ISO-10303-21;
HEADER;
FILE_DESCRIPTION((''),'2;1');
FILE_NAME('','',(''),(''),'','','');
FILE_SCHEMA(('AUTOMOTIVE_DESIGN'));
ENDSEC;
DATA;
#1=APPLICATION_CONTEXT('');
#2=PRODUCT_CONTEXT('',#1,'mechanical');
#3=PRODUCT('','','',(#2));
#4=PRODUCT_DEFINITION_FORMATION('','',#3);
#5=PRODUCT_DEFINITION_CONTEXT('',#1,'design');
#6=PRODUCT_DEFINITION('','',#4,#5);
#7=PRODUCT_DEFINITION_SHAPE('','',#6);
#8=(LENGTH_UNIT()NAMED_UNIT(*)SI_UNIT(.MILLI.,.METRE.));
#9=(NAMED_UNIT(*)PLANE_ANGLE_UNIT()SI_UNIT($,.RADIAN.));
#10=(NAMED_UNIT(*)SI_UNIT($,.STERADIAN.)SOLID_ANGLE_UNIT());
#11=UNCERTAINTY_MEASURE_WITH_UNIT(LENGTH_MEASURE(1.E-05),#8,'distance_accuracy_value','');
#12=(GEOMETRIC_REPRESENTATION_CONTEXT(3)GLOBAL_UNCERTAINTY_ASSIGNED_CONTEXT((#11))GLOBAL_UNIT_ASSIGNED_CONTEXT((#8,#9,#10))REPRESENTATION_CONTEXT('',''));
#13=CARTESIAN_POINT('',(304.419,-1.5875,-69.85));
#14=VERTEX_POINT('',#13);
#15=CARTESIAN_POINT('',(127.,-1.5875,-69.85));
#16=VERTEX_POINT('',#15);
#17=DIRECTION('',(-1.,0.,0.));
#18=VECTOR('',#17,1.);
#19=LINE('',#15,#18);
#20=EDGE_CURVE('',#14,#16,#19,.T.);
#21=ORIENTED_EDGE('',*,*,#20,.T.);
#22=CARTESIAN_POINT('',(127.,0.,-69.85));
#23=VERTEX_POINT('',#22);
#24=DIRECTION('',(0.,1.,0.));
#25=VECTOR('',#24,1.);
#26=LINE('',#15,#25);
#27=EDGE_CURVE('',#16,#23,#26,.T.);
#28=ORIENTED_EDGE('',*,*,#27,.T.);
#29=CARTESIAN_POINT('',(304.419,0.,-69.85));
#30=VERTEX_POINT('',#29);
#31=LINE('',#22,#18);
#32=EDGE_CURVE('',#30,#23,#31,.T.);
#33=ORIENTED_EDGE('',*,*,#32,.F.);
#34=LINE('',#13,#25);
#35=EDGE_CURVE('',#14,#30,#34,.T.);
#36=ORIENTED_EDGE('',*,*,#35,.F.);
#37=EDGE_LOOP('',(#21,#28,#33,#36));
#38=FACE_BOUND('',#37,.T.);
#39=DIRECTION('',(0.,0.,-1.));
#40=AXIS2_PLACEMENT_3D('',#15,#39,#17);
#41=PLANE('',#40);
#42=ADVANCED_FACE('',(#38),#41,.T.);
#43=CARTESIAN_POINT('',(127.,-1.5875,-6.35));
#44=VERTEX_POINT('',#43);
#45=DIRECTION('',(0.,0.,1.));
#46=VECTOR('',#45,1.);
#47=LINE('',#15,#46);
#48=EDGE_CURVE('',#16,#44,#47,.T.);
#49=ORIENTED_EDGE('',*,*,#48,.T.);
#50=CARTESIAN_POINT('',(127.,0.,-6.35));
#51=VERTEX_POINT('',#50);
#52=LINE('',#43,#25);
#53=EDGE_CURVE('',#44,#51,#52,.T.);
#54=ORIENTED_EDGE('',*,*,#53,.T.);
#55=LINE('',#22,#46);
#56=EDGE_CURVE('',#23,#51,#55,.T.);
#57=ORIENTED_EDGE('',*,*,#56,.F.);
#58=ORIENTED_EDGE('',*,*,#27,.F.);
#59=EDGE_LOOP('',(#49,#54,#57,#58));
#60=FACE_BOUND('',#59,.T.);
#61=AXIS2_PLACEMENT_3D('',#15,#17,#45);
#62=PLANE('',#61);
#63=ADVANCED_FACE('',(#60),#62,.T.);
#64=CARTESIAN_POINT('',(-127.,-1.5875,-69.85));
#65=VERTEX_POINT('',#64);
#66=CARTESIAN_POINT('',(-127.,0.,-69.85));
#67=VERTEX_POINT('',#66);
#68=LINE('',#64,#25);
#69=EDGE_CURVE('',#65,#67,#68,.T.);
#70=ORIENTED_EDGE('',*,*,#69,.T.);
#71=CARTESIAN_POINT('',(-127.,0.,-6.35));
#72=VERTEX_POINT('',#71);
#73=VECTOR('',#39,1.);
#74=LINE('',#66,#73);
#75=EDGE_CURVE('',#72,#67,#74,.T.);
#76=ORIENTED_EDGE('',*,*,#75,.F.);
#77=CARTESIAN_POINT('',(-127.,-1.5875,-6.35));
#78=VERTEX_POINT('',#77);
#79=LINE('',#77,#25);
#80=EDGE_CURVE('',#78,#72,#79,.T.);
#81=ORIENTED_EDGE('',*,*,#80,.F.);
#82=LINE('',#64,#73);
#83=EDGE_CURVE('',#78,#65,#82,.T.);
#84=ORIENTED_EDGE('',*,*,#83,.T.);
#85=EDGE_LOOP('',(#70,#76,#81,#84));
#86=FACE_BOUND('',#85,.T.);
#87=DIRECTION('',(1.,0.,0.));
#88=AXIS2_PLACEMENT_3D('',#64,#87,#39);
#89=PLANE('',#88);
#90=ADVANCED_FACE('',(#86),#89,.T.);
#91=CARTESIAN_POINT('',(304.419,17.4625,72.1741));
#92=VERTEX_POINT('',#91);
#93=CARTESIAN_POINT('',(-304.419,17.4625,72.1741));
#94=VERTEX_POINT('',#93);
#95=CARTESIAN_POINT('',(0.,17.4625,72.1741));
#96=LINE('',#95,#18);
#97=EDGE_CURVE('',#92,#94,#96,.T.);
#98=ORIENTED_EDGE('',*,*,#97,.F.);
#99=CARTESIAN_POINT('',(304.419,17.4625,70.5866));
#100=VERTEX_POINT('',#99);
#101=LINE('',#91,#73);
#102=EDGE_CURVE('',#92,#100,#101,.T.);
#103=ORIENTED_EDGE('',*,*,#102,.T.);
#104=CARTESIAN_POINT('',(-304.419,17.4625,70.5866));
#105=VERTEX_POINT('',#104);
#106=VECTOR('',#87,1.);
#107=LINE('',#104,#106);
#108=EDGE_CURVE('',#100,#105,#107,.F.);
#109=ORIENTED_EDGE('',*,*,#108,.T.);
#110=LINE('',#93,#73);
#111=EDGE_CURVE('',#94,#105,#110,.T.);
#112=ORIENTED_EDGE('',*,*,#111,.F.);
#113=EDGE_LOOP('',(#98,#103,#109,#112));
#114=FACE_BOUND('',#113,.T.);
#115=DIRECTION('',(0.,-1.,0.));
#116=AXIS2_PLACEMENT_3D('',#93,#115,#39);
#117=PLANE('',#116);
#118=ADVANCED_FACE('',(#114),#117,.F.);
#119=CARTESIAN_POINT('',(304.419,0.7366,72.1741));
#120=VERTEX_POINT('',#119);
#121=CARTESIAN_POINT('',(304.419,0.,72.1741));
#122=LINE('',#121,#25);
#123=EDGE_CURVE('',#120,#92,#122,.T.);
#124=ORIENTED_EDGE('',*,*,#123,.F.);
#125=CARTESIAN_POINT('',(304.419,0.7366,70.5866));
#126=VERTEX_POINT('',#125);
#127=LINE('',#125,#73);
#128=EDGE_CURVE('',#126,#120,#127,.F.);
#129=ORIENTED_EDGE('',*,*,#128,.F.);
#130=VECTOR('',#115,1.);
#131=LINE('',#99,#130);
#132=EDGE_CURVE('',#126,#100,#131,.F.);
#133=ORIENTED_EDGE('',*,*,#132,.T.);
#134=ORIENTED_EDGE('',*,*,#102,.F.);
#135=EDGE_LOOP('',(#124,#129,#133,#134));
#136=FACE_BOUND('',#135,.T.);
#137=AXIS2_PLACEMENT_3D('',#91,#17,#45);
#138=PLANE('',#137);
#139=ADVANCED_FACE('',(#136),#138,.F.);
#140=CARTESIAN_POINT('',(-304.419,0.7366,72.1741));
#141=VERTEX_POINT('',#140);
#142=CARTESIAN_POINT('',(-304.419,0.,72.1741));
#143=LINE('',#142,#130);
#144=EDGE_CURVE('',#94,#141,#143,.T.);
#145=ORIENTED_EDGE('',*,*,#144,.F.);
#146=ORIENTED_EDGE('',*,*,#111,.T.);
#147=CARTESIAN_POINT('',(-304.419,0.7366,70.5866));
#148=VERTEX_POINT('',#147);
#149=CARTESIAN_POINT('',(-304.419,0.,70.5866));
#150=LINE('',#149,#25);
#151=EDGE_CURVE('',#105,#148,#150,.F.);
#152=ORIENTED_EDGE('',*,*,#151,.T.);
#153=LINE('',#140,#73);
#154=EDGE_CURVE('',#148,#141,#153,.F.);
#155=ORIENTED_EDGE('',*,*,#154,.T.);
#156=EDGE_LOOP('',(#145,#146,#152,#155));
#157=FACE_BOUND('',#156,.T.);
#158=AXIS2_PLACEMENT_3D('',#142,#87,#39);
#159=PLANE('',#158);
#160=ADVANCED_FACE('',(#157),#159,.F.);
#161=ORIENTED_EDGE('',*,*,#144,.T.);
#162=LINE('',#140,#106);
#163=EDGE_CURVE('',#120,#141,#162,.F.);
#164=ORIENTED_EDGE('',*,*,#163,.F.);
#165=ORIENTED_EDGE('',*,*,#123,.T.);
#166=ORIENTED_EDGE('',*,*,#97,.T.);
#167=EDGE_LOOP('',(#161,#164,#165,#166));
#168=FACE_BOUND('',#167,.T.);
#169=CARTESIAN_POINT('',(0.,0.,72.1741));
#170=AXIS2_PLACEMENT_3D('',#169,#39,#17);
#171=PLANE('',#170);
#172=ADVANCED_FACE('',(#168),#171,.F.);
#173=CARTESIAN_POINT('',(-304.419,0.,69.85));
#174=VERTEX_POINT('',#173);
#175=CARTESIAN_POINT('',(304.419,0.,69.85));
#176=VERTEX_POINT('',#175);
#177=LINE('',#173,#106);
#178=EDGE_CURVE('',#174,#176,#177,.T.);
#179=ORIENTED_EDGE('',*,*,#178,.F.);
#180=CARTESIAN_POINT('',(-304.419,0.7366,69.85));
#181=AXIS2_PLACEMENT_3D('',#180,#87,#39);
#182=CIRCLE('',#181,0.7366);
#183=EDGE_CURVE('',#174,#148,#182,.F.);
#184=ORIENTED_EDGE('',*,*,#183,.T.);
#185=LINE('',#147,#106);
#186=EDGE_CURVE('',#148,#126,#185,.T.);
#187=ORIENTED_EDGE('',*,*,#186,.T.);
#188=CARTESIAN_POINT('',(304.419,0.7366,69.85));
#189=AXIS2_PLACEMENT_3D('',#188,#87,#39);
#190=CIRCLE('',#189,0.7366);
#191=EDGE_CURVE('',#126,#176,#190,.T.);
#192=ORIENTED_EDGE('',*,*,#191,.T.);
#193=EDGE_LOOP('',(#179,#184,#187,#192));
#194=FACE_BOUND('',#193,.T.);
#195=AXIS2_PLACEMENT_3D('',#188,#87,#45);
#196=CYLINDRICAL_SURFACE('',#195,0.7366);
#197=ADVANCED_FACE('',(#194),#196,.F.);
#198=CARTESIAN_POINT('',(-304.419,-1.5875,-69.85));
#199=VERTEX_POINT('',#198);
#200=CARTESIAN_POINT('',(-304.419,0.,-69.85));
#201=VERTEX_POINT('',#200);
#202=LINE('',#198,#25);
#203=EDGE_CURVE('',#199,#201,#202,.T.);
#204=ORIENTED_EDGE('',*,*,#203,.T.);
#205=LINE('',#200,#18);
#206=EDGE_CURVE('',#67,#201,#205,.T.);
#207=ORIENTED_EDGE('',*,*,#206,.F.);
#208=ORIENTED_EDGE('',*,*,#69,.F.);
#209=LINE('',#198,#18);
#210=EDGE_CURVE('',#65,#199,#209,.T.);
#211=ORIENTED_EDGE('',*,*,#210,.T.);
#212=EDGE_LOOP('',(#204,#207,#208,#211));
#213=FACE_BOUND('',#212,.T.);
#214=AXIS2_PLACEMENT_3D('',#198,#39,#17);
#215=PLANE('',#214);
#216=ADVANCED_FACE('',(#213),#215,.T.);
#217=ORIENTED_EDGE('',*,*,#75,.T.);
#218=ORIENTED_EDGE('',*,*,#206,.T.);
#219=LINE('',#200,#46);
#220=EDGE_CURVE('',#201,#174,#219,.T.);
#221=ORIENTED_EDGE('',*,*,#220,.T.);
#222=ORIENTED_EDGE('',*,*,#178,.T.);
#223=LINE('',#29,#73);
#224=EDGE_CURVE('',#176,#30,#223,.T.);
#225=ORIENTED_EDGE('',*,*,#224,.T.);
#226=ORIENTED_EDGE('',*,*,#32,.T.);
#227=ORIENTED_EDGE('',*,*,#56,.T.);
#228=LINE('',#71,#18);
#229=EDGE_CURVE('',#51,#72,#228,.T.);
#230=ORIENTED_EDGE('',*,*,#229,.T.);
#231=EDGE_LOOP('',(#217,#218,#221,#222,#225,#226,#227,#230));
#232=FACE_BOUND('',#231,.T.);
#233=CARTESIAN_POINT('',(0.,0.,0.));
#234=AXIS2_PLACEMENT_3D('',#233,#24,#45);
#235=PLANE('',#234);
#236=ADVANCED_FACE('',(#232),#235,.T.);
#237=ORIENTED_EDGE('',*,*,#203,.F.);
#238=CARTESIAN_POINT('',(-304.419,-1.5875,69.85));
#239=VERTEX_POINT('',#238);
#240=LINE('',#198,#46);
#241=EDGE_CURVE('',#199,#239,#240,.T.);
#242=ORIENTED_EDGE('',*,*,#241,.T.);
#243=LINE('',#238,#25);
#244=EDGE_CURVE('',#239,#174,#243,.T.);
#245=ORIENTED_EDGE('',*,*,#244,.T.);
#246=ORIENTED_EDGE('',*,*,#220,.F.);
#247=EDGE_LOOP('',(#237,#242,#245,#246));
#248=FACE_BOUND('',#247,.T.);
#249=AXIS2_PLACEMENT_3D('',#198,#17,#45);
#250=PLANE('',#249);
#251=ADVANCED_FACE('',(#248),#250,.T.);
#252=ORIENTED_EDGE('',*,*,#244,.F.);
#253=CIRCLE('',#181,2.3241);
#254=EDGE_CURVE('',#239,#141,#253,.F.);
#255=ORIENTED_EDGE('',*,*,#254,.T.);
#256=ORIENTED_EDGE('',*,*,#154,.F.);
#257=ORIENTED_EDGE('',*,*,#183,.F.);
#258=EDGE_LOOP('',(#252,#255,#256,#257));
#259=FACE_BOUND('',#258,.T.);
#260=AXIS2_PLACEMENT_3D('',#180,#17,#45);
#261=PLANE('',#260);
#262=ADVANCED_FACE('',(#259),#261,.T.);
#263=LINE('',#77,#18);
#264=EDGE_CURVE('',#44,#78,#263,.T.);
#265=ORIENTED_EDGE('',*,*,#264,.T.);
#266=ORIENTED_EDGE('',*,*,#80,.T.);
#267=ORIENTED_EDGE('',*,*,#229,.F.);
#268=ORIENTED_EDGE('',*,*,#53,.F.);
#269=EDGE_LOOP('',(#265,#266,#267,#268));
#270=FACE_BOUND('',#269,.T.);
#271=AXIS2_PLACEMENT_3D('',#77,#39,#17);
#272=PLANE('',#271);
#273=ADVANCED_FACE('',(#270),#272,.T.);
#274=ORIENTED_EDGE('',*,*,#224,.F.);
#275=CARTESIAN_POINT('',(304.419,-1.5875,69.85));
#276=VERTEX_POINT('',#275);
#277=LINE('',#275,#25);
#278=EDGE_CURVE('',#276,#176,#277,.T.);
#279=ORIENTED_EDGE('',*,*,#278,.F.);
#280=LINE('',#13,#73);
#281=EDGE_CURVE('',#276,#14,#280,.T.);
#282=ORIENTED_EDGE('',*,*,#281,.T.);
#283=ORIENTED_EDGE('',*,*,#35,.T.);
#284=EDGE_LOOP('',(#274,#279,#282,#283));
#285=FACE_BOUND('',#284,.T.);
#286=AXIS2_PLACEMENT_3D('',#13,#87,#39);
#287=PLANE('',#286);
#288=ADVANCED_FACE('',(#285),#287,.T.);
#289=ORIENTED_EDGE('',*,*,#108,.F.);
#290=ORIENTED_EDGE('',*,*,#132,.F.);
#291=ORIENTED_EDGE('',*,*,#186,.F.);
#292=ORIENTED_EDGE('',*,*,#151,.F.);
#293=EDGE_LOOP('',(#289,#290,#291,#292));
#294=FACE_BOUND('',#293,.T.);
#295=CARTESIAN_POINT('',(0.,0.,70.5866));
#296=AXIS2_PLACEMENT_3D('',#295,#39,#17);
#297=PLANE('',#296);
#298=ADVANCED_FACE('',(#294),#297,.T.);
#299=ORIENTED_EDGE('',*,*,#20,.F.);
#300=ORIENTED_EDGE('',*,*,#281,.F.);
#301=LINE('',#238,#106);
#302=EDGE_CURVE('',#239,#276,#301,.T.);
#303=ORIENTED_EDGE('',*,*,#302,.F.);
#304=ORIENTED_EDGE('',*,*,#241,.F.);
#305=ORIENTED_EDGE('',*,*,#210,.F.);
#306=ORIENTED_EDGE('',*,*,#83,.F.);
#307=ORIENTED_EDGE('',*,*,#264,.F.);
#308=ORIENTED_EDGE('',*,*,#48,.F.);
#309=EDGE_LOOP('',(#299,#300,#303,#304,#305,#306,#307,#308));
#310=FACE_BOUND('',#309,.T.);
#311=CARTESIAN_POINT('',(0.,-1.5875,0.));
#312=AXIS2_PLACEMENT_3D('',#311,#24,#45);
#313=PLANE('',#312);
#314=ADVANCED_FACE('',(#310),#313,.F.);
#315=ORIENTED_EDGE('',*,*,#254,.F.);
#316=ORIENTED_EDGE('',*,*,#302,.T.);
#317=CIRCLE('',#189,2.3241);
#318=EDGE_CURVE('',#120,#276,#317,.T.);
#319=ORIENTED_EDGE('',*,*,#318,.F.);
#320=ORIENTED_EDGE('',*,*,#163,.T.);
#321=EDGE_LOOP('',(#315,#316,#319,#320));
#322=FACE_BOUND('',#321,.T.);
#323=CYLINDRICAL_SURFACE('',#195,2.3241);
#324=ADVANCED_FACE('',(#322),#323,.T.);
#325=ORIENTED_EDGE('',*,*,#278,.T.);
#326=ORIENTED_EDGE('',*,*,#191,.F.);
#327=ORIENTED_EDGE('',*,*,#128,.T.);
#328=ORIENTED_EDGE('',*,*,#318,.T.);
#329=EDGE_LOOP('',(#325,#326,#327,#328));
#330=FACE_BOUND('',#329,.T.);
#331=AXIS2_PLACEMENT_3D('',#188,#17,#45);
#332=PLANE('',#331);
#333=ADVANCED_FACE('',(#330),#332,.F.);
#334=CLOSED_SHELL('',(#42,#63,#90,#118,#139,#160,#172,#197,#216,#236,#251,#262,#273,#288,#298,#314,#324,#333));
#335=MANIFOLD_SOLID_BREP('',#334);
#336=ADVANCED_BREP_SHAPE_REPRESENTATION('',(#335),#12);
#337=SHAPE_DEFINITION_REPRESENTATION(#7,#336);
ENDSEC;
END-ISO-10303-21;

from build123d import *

# Parameters (mm, degrees)
BASE_FLANGE1_DEPTH = 1.5875
EDGE_FLANGE1_DEPTH = 608.838


# Sheet-metal steps are written as plain solids
with BuildPart() as part:
    # Sketch1 → Base-Flange1 (new body)
    with BuildSketch(Plane(origin=(0, 0, 0), x_dir=(1, 0, 0), z_dir=(0, 1, 0))):
        Polygon((-304.419, 69.85), (-127, 69.85), (-127, 6.35), (127, 6.35), (127, 69.85), (304.419, 69.85), (304.419, -69.85), (-304.419, -69.85), align=None)
    extrude(amount=-BASE_FLANGE1_DEPTH)

    # Edge-Flange1 section (across the edge) → Edge-Flange1 (add)
    with BuildSketch(Plane(origin=(-304.419, 0, 70.5866), x_dir=(0, 0, -1), z_dir=(1, 0, 0))):
        with BuildLine():
            Line((-1.5875, 0.7366), (-1.5875, 17.4625))
            Line((-1.5875, 17.4625), (0, 17.4625))
            Line((0, 17.4625), (0, 0.7366))
            ThreePointArc((0, 0.7366), (0.215745145, 0.215745145), (0.7366, 0))
            Line((0.7366, 0), (0.7366, -1.5875))
            ThreePointArc((0.7366, -1.5875), (-0.90678687, -0.90678687), (-1.5875, 0.7366))
        make_face()
    extrude(amount=EDGE_FLANGE1_DEPTH)


solid = part.part
